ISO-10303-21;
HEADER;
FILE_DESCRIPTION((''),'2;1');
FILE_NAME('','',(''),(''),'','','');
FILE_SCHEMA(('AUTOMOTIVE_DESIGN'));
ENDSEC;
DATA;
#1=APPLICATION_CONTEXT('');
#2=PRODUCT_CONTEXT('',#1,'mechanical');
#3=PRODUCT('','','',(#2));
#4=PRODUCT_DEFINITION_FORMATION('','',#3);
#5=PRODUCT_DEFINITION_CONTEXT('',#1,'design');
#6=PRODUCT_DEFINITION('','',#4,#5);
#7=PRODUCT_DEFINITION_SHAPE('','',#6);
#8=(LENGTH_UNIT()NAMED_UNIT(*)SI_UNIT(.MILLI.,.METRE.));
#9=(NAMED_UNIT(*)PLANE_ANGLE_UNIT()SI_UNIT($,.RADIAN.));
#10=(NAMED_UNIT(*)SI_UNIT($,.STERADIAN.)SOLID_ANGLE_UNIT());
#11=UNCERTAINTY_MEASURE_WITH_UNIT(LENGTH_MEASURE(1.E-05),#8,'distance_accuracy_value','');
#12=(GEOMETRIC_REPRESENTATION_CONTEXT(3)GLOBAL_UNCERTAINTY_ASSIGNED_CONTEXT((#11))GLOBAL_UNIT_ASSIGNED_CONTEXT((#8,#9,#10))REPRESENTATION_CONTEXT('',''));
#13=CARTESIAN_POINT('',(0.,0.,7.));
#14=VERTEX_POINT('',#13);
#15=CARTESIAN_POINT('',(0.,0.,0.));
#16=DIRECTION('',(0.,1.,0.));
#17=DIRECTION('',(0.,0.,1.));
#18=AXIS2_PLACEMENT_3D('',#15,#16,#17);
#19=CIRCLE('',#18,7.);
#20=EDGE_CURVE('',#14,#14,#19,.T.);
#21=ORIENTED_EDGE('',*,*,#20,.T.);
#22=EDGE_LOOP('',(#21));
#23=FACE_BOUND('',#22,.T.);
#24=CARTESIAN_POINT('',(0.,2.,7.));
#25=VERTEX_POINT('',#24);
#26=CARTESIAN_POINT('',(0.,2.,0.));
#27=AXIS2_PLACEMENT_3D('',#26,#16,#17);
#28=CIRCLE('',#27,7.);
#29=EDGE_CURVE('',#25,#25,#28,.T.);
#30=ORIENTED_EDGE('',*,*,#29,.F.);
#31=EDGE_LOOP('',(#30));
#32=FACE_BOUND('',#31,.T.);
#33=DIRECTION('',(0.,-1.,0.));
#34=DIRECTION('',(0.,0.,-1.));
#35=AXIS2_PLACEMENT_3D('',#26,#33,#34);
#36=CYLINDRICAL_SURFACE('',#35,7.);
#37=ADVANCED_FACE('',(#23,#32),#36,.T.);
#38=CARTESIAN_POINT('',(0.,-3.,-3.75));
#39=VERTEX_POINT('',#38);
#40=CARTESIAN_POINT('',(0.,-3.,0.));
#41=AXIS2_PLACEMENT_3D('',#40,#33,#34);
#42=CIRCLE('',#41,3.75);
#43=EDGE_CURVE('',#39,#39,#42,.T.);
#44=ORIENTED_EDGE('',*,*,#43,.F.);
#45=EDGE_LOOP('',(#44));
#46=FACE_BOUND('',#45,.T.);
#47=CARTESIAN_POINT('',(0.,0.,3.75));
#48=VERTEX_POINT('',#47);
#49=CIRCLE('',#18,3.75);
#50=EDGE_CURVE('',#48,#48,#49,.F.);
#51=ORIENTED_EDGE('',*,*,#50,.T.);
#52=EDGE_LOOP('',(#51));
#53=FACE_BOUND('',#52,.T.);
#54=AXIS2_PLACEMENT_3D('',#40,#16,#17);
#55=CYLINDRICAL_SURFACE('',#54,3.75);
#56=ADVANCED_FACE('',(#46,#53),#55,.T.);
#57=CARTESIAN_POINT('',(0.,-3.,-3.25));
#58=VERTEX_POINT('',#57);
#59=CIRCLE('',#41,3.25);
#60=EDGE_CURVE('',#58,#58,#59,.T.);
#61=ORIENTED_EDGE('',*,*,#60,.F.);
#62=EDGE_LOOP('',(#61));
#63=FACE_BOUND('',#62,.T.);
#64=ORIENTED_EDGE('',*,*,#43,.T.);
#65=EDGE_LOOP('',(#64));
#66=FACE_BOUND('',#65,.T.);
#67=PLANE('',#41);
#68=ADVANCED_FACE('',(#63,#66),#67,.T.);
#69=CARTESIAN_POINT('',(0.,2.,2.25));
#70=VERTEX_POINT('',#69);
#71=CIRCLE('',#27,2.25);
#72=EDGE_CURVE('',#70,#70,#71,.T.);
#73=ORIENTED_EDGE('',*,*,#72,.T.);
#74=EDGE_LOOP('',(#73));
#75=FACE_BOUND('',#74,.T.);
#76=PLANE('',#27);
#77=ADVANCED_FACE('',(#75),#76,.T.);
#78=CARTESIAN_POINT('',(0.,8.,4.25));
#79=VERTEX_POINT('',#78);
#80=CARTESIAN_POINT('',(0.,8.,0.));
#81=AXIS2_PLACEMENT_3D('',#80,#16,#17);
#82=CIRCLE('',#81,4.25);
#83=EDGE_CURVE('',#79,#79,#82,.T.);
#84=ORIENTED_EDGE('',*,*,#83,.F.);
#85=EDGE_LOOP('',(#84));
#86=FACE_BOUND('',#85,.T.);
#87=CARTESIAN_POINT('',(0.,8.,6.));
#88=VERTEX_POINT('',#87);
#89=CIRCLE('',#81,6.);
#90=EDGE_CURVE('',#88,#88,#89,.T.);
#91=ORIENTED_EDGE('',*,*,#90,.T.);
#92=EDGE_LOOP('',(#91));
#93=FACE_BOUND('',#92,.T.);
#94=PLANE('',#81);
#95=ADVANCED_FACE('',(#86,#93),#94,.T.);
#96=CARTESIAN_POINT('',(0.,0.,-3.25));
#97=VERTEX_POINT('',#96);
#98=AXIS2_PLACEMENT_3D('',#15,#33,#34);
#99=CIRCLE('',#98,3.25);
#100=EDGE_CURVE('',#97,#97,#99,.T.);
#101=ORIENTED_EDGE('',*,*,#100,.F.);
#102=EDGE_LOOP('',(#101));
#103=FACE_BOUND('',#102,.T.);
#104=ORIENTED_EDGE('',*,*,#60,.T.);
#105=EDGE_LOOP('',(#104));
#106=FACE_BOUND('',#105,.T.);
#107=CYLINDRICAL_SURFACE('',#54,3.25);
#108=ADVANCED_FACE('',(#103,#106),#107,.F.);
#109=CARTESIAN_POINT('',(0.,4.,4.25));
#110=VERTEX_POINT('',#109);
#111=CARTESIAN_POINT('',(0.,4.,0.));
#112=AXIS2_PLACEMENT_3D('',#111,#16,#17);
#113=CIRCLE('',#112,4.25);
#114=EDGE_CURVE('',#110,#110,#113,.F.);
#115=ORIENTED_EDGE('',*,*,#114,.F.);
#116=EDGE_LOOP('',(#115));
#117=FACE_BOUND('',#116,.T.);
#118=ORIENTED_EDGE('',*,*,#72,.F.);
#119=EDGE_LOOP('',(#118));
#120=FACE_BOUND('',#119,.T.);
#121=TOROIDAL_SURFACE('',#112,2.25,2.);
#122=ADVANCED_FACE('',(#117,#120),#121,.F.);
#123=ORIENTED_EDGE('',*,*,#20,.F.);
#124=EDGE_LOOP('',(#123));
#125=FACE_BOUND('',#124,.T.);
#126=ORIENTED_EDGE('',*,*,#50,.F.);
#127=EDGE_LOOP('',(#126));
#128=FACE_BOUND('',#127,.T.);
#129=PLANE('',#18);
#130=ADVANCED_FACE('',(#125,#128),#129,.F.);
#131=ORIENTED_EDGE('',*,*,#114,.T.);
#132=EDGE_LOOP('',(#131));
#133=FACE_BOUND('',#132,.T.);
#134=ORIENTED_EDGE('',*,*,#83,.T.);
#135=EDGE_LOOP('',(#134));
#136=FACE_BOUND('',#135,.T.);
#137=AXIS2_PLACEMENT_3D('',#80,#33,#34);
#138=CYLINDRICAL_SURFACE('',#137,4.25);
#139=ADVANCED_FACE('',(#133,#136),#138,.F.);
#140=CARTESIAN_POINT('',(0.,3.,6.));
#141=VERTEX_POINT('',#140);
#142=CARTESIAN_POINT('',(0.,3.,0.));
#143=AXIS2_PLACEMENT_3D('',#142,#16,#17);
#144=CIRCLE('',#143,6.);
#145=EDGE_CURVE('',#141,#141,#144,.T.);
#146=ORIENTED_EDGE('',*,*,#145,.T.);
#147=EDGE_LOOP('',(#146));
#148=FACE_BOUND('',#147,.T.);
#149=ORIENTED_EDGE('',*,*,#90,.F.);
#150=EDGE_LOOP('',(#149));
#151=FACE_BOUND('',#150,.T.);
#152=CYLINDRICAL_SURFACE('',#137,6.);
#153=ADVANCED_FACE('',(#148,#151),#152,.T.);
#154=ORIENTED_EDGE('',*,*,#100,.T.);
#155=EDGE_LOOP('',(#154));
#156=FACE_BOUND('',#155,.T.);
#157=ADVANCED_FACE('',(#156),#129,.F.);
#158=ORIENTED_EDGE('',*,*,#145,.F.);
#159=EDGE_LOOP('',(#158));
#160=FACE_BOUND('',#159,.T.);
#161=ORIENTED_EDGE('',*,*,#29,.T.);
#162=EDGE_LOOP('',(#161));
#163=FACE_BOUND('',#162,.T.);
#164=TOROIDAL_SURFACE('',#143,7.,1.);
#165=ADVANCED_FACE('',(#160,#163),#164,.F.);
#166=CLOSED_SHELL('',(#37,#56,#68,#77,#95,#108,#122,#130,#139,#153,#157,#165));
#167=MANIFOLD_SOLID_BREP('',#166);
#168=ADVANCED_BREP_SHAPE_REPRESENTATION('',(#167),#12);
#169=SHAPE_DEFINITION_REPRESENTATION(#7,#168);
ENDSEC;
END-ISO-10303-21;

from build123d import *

# Parameters (mm, degrees)
CROQUIS1_R              = 7
SALIENTE_EXTRUIR1_DEPTH = 2
CROQUIS2_R              = 6
CROQUIS2_R_2            = 4.25
SALIENTE_EXTRUIR2_DEPTH = 6
REDONDEO3_R             = 2
REDONDEO4_R             = 1
CROQUIS3_R              = 3.75
CROQUIS3_R_2            = 3.25
SALIENTE_EXTRUIR3_DEPTH = 3


with BuildPart() as part:
    # Croquis1 → Saliente-Extruir1 (new body)
    with BuildSketch(Plane(origin=(0, 0, 0), x_dir=(1, 0, 0), z_dir=(0, 1, 0))):
        with Locations(Location((0, 0, 0), (0, 0, 270))):
            Circle(CROQUIS1_R)
    extrude(amount=SALIENTE_EXTRUIR1_DEPTH)

    # Croquis2 → Saliente-Extruir2 (add)
    with BuildSketch(Plane(origin=(0, 2, 0), x_dir=(1, 0, 0), z_dir=(0, 1, 0))):
        with Locations(Location((0, 0, 0), (0, 0, 270))):
            Circle(CROQUIS2_R)
        with Locations(Location((0, 0, 0), (0, 0, 270))):
            Circle(CROQUIS2_R_2, mode=Mode.SUBTRACT)
    extrude(amount=SALIENTE_EXTRUIR2_DEPTH)

    # Redondeo3
    redondeo3_edges = [part.edges().sort_by_distance(p)[0] for p in [
        (0, 2, -4.25),
    ]]
    fillet(redondeo3_edges, radius=REDONDEO3_R)

    # Redondeo4
    redondeo4_edges = [part.edges().sort_by_distance(p)[0] for p in [
        (0, 2, -6),
    ]]
    fillet(redondeo4_edges, radius=REDONDEO4_R - 0.0001)  # a hair under: the kernel refuses the full size

    # Croquis3 → Saliente-Extruir3 (add)
    with BuildSketch(Plane.XZ):
        with Locations(Location((0, 0, 0), (0, 0, 90))):
            Circle(CROQUIS3_R)
        with Locations(Location((0, 0, 0), (0, 0, 270))):
            Circle(CROQUIS3_R_2, mode=Mode.SUBTRACT)
    extrude(amount=SALIENTE_EXTRUIR3_DEPTH)


solid = part.part
